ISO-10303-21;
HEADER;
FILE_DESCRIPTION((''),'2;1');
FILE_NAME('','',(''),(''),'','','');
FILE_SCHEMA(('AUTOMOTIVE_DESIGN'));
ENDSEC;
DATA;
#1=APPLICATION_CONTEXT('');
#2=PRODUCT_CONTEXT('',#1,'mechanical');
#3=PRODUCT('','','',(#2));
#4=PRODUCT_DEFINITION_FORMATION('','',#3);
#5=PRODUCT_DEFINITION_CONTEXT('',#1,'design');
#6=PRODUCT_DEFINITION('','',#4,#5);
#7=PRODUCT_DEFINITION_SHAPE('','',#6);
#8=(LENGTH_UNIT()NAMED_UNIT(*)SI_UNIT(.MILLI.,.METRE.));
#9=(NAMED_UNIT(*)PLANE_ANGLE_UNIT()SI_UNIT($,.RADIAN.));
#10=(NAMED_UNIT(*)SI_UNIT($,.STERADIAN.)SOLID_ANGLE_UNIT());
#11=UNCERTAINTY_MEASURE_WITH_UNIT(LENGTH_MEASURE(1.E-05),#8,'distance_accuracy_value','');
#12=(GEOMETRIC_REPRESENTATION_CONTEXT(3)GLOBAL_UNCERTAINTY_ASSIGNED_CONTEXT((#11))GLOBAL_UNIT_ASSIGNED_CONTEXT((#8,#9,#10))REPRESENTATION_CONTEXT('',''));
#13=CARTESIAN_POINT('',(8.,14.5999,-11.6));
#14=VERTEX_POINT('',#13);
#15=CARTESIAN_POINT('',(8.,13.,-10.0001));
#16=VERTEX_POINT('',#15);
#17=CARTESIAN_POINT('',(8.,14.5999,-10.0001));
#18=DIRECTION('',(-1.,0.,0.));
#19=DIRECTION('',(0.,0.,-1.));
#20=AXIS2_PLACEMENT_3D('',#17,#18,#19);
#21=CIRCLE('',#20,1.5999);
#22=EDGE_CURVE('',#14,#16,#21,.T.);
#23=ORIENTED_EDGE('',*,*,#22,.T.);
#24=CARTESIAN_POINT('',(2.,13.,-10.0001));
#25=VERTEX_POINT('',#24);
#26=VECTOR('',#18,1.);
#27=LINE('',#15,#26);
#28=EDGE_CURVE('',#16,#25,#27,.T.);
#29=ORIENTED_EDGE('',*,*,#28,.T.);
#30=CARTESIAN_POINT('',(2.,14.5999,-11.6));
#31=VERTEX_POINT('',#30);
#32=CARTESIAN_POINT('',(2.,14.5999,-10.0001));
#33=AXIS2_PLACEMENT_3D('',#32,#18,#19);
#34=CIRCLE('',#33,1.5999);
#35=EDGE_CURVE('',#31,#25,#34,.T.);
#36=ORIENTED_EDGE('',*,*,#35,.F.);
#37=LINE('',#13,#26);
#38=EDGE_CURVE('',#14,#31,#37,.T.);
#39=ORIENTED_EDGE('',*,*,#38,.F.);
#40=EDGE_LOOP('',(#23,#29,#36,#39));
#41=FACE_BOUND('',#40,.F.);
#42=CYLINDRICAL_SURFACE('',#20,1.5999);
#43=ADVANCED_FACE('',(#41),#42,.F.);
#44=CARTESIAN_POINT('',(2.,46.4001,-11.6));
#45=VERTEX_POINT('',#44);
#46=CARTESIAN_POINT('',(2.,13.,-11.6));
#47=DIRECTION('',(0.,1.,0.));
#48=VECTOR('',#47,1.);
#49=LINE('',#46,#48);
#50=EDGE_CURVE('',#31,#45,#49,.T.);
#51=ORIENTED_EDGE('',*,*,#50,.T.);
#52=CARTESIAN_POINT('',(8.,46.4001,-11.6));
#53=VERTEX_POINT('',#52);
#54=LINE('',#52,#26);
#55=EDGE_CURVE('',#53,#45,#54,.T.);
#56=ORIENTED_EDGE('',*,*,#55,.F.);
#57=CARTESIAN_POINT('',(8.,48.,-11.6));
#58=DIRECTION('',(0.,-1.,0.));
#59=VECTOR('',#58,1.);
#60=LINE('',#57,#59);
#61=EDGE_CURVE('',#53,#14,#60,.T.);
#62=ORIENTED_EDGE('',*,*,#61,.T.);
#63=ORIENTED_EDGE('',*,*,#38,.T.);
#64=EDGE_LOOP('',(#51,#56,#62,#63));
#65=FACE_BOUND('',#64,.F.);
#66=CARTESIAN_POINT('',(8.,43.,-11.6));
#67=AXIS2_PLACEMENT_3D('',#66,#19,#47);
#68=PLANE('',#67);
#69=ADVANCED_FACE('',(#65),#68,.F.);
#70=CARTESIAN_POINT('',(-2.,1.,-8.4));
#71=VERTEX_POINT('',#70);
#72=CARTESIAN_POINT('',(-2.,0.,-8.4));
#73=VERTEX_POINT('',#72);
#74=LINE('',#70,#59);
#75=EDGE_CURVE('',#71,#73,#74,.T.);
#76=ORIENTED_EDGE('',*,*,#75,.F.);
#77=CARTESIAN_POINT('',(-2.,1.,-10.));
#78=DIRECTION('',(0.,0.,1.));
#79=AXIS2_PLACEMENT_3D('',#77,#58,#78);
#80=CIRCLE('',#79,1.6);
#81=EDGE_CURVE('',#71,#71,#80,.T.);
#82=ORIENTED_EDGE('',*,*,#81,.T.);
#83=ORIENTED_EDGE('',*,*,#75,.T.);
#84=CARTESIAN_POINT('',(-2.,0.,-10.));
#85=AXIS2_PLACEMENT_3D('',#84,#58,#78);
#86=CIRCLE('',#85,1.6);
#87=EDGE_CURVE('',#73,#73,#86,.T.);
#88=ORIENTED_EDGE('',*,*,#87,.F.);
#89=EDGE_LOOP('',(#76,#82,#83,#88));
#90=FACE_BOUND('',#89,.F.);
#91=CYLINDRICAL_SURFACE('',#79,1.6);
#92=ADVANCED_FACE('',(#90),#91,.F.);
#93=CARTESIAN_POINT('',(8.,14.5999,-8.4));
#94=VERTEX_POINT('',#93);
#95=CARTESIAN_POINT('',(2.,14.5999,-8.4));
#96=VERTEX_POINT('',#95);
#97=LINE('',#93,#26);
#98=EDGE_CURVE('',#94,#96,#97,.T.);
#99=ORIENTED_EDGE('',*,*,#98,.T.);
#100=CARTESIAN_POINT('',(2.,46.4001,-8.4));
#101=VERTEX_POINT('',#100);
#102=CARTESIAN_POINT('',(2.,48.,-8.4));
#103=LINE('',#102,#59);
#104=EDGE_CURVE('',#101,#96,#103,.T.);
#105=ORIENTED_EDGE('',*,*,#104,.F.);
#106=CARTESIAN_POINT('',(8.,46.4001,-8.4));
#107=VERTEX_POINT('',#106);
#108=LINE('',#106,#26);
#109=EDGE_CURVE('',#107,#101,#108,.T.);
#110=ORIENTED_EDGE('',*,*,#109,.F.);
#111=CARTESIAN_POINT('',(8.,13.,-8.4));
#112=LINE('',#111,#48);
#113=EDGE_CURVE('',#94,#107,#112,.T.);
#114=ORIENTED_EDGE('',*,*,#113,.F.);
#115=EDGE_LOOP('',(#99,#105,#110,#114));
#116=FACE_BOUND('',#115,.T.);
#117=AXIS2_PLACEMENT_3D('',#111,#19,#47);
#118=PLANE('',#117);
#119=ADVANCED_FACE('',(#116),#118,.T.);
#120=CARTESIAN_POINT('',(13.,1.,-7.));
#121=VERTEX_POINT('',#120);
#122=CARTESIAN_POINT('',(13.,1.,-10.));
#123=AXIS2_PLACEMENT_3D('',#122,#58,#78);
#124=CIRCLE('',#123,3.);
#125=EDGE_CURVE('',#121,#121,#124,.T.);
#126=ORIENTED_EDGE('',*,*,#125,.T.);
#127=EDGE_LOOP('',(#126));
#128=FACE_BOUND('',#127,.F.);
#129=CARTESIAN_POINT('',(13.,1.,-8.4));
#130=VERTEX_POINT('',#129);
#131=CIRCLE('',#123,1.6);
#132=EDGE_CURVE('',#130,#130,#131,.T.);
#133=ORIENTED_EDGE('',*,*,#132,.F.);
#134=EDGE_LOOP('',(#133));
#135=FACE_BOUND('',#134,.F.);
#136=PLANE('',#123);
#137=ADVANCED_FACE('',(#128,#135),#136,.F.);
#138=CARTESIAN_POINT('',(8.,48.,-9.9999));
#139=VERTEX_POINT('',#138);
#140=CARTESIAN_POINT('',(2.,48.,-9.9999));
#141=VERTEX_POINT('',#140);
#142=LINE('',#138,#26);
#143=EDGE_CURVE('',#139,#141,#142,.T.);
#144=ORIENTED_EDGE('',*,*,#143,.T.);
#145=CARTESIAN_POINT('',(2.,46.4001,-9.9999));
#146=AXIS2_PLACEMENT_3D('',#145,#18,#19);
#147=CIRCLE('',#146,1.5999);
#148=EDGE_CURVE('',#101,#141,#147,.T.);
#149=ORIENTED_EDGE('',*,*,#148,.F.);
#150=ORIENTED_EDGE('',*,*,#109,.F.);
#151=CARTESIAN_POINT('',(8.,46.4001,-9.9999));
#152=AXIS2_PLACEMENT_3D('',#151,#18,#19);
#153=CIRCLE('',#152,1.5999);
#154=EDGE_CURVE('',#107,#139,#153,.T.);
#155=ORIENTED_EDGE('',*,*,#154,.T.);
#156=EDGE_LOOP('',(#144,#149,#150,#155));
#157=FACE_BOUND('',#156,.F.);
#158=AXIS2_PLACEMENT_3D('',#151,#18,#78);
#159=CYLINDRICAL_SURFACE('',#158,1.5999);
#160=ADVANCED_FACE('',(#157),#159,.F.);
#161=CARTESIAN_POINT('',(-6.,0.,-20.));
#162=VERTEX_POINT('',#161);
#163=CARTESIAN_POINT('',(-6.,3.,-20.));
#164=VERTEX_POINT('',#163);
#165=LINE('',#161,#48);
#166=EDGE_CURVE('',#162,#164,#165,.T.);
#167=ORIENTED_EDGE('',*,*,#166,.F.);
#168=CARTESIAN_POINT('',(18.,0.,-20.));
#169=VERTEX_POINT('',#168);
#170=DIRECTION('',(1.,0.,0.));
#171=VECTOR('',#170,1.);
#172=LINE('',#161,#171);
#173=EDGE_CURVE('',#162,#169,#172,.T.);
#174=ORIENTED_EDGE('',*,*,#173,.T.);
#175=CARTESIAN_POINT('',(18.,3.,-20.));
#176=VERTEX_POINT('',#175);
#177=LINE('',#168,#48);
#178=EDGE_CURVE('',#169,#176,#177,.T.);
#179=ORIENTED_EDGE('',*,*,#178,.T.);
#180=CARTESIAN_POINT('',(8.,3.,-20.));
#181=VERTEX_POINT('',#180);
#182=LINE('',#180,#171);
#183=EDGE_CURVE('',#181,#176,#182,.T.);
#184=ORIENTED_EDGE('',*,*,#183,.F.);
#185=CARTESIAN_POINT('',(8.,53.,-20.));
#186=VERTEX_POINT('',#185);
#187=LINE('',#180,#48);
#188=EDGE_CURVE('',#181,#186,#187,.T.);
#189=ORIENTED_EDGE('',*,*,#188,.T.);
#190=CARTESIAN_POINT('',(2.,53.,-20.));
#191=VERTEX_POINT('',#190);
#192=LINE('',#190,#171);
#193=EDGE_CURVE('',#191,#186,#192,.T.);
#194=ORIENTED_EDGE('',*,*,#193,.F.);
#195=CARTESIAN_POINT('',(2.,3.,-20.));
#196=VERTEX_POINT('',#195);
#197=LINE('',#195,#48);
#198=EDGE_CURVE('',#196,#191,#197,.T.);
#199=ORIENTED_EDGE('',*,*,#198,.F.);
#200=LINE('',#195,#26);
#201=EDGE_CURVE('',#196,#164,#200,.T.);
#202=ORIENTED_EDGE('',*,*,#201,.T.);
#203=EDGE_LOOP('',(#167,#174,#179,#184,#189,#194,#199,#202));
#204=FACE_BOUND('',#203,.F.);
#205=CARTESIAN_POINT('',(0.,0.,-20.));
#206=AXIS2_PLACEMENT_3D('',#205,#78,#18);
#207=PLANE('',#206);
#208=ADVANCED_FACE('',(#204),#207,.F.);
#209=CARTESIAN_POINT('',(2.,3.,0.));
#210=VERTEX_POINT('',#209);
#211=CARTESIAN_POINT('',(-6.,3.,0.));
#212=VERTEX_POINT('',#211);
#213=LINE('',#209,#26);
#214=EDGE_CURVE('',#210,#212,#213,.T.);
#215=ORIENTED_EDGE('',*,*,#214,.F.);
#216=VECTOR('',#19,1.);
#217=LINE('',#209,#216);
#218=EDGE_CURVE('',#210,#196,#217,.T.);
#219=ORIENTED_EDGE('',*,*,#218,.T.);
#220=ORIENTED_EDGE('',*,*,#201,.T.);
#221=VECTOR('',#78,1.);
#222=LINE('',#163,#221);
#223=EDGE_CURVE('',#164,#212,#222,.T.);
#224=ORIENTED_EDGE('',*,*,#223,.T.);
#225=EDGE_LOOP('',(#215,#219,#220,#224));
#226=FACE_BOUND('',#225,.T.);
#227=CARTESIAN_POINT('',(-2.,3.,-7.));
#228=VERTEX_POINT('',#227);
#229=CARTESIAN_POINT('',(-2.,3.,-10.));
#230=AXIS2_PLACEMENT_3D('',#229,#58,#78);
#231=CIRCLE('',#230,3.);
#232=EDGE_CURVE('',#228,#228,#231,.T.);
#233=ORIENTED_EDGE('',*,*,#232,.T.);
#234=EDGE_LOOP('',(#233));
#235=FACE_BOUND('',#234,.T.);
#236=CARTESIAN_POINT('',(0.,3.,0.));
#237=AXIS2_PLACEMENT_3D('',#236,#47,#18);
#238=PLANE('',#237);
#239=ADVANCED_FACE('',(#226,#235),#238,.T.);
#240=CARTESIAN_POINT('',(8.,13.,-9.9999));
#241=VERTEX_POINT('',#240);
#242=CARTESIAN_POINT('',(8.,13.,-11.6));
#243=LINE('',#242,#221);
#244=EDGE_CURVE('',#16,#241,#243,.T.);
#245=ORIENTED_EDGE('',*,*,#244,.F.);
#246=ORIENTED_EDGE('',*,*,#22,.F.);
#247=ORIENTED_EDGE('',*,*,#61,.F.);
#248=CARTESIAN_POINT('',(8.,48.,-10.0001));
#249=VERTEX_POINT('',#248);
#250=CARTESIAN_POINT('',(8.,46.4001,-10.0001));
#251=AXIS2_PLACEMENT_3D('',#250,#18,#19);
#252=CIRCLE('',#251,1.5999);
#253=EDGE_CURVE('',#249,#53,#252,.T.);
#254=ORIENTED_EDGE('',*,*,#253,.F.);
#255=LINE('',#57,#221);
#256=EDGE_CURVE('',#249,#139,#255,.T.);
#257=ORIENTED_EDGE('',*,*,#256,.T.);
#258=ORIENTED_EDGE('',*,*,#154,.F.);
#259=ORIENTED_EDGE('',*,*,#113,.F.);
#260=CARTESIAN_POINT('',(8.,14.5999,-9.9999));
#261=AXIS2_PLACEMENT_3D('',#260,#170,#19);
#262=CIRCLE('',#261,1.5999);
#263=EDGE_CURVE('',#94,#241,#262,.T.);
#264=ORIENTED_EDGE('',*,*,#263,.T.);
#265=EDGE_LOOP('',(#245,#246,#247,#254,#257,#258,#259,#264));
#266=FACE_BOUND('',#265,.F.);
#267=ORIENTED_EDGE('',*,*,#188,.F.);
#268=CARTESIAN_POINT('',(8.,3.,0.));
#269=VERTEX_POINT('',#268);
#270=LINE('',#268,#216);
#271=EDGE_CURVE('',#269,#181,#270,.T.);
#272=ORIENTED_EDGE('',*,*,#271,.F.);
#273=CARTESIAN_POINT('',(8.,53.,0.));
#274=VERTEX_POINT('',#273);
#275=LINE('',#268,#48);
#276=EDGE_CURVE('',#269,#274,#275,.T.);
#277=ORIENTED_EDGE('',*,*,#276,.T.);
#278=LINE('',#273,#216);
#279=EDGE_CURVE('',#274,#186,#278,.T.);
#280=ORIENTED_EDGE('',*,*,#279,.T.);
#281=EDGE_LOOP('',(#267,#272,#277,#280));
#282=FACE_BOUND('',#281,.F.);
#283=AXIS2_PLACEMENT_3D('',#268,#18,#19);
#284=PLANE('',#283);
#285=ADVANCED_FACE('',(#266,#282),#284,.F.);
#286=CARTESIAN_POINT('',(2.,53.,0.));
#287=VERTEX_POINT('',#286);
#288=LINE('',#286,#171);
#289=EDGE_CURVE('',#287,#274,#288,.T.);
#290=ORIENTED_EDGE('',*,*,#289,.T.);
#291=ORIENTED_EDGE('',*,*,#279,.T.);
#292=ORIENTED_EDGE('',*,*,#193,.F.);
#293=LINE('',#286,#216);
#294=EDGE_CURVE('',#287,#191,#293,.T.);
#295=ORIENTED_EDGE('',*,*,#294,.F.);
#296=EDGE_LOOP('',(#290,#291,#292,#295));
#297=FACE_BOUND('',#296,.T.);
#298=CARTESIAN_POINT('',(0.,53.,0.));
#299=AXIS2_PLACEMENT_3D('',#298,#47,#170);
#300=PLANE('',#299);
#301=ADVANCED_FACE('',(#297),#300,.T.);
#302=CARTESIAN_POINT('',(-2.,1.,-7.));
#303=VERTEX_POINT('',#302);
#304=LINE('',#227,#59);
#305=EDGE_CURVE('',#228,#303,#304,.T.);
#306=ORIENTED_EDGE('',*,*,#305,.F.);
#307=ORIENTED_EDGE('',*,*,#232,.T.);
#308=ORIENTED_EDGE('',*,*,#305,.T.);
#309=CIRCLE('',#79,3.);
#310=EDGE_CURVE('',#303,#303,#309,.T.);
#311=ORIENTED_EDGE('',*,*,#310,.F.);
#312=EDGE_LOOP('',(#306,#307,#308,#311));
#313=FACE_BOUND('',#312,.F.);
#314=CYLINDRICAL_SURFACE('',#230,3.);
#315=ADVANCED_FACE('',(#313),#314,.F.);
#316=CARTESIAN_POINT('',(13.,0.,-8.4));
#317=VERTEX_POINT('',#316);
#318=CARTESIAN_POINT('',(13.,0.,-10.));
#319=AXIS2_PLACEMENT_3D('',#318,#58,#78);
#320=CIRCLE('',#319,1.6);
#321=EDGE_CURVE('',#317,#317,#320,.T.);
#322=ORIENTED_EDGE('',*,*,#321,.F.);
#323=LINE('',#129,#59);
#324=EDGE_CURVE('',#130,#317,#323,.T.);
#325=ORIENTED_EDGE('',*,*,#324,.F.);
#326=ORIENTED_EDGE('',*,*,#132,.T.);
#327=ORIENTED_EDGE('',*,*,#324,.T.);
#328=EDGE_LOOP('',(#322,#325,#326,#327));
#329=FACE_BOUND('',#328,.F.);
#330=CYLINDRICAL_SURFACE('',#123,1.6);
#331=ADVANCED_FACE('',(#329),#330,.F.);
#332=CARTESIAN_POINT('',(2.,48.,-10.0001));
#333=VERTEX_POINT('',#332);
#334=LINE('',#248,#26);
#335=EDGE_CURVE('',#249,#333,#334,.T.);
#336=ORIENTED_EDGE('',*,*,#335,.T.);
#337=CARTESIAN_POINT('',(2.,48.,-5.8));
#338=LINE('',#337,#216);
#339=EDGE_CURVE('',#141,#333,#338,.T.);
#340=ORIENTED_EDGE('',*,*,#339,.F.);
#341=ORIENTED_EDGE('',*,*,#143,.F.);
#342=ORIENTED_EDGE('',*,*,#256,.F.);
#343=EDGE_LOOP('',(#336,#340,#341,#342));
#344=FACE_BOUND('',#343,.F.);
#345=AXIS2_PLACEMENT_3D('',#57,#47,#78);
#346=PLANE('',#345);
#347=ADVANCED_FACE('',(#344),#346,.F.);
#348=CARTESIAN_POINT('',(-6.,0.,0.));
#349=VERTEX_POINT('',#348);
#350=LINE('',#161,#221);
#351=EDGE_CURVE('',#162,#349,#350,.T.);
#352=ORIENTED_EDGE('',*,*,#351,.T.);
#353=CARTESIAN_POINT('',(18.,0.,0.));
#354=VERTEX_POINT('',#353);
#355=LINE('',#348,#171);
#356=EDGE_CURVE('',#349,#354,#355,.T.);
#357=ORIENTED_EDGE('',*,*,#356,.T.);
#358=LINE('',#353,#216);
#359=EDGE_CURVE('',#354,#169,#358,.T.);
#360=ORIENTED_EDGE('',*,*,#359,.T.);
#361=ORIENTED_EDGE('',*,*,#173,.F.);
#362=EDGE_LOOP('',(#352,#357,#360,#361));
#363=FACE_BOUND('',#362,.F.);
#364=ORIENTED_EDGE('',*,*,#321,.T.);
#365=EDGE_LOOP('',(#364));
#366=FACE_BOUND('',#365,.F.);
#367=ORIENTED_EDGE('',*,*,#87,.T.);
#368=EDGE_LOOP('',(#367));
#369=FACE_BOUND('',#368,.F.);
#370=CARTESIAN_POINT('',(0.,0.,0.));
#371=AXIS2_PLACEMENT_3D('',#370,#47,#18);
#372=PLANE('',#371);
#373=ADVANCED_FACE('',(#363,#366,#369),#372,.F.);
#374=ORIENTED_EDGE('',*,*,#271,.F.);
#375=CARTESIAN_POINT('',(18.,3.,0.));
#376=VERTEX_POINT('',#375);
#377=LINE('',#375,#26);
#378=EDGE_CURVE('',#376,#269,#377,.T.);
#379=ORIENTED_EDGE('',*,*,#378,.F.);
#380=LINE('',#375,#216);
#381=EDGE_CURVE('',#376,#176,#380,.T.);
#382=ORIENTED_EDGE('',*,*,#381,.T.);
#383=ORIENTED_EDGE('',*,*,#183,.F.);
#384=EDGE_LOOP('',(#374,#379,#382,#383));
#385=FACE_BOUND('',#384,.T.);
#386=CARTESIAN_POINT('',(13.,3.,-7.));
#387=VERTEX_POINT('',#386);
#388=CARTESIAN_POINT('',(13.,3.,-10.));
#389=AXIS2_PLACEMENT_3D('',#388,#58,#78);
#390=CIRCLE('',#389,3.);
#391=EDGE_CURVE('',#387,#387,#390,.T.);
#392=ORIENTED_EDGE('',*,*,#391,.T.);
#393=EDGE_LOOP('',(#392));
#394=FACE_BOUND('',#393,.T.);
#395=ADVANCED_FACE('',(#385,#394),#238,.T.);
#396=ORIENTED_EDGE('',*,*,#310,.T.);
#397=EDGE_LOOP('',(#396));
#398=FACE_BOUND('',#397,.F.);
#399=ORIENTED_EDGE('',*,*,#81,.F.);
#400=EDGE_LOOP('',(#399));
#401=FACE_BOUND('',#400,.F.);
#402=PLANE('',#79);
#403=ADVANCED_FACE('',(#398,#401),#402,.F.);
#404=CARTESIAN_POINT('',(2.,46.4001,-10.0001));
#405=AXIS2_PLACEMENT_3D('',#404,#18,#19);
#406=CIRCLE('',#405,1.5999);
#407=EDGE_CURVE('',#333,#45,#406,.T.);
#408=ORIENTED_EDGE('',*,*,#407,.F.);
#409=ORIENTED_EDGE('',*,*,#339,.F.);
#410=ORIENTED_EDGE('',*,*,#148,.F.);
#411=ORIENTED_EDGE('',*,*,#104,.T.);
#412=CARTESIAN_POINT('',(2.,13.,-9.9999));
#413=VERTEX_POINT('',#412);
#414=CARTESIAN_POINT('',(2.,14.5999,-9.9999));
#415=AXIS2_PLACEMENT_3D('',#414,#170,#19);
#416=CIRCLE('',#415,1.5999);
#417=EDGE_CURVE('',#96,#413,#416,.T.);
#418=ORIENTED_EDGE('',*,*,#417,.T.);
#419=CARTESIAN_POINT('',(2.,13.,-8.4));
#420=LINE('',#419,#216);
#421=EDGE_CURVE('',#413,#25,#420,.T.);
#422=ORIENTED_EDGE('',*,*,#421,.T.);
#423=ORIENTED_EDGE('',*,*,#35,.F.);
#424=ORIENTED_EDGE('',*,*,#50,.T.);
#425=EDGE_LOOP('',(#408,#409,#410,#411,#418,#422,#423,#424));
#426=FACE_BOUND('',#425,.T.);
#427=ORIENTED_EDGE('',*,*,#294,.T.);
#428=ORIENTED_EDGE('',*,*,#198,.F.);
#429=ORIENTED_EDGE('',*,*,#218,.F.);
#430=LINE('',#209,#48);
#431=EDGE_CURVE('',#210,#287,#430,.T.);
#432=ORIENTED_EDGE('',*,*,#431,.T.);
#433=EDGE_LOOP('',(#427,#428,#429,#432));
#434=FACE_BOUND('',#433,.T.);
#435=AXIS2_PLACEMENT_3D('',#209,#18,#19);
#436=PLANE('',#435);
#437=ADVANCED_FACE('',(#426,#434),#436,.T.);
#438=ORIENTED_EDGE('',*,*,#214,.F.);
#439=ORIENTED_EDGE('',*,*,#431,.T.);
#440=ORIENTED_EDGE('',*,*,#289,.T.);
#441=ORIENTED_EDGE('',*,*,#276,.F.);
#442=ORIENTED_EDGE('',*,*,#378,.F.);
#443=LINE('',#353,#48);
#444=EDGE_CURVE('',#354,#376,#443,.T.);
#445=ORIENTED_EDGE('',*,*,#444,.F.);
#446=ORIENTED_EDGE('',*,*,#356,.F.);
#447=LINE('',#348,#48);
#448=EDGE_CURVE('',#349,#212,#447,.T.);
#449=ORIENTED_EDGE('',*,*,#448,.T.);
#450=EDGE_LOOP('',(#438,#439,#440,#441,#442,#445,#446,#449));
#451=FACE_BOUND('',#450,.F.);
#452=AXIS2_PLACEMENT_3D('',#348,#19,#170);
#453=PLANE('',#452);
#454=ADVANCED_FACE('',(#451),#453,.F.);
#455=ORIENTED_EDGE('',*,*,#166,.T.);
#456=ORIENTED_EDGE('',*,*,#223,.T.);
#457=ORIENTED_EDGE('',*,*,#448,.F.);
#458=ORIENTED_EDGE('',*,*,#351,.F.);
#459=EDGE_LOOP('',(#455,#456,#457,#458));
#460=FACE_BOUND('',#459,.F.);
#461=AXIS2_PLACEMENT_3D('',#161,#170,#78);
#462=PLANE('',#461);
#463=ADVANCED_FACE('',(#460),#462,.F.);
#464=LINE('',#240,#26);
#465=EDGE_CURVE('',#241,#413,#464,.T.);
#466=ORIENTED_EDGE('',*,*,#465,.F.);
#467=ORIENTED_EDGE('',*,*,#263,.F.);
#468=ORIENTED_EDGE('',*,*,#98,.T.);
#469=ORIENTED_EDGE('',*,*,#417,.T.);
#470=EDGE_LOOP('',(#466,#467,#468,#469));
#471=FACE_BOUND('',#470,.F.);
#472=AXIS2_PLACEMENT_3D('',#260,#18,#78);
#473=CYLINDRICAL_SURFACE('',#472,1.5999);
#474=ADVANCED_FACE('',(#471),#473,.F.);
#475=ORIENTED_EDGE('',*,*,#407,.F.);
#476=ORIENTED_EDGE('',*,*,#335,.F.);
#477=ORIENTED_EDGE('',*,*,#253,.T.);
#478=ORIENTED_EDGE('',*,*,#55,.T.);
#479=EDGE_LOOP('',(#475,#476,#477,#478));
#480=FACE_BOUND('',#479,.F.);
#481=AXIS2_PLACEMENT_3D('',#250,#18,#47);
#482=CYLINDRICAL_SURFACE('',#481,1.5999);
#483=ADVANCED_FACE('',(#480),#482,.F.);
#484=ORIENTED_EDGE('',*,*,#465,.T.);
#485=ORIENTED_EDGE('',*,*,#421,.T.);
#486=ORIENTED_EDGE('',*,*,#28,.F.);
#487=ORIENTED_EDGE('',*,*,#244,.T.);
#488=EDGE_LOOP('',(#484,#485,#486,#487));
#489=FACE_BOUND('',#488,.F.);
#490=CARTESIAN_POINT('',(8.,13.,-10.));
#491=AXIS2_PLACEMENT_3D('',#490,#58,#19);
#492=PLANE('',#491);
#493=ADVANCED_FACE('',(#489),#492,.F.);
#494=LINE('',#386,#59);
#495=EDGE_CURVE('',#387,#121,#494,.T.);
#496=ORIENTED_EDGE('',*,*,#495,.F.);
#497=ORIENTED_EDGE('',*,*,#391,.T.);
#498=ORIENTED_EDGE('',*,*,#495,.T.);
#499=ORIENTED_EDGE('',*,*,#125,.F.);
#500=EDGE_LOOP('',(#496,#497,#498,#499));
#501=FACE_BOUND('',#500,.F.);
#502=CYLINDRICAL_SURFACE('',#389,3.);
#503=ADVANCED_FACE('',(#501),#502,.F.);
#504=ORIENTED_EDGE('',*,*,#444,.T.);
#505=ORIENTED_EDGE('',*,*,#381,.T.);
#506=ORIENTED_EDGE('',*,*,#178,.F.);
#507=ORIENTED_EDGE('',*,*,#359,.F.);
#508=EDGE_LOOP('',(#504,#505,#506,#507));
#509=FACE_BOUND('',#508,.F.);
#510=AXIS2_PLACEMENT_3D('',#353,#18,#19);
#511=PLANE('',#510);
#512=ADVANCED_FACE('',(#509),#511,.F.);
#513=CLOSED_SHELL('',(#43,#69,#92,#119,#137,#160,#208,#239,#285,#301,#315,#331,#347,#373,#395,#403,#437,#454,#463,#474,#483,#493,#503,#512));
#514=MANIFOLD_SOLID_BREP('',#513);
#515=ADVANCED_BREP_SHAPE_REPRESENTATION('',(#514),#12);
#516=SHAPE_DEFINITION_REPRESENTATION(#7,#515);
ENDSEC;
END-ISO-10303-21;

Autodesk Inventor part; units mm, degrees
ref_plane "YZ Plane" through (0, 0, 0) normal (1, 0, 0) x (0, 1, 0)
ref_plane "XZ Plane" through (0, 0, 0) normal (0, 1, 0) x (-1, 0, 0)
ref_plane "XY Plane" through (0, 0, 0) normal (0, 0, 1) x (1, 0, 0)
sketch "Boceto1" plane through (0, 0, 0) normal (0, 1, 0) x (-1, 0, 0)
  line L0 (0, 0) -> (-10, 0)
  line L1 (-10, -20) -> (0, -20)
  line L2 (-10, 0) -> (-8, 0)
  line L3 (-8, 0) -> (-14, 0)
  line L4 (-14, 0) -> (-18, 0)
  line L5 (-18, 0) -> (-18, -20)
  line L6 (-18, -20) -> (-10, -20)
  line L7 (0, -20) -> (-2, -20)
  line L8 (-2, -20) -> (6, -20)
  line L9 (6, -20) -> (6, 0)
  line L10 (6, 0) -> (0, 0)
  dimension "d8" = 4
  dimension "d9" = 8
extrude "Extrusión1" add sketch "Boceto1" along normal blind 3
sketch "Boceto2" plane through (0, 3, 0) normal (0, 1, 0) x (1, 0, 0)
  line L0 (5, 20) -> (2, 20)
  line L1 (2, 0) -> (2, 20)
  line L2 (5, 20) -> (8, 20)
  line L3 (8, 0) -> (8, 20)
  line L4 (2, 0) -> (8, 0)
extrude "Extrusión2" add sketch "Boceto2" along normal blind 50
sketch "Boceto4" plane through (0, 3, 0) normal (0, 1, 0) x (1, 0, 0)
  line L0 (-6, 0) -> (18, 0) projected
  line L1 (18, 0) -> (8, 0)
  line L2 (13, 0) -> (13, 20)
  point P0 (0, 0)
  point P1 (13, 10)
hole "Agujero2" at (13, 3, -10) direction (0, -1, 0) diameter 3.2 depth 15 counterbore diameter 6 counterbore depth 2
sketch "Boceto5" plane through (0, 3, 0) normal (0, 1, 0) x (1, 0, 0)
  line L0 (-6, 20) -> (-6, 0) projected
  line L1 (-6, 10) -> (2, 10)
  point P0 (0, 0)
  point P1 (-2, 10)
hole "Agujero3" at (-2, 3, -10) direction (0, -1, 0) diameter 3.2 depth 15 counterbore diameter 6 counterbore depth 2
sketch "Boceto6" plane through (8, 3, 0) normal (1, 0, 0) x (0, 0, -1)
  line L0 (10, 10) -> (11.6, 10)
  line L1 (10, 10) -> (8.4, 10)
  line L2 (8.4, 10) -> (8.4, 40)
  line L3 (11.6, 40) -> (11.6, 10)
  line L4 (11.6, 40) -> (11.6, 45)
  line L5 (11.6, 45) -> (8.4, 45)
  line L6 (8.4, 45) -> (8.4, 40)
  point P0 (0, -3)
extrude "Extrusión3" cut sketch "Boceto6" against normal blind 35.5
fillet "Empalme1" radius 1.6 4 edges at (5, 48, -11.6) (5, 48, -8.4) (5, 13, -8.4) (5, 13, -11.6)
properties part number "Ventilador tub - guies"
